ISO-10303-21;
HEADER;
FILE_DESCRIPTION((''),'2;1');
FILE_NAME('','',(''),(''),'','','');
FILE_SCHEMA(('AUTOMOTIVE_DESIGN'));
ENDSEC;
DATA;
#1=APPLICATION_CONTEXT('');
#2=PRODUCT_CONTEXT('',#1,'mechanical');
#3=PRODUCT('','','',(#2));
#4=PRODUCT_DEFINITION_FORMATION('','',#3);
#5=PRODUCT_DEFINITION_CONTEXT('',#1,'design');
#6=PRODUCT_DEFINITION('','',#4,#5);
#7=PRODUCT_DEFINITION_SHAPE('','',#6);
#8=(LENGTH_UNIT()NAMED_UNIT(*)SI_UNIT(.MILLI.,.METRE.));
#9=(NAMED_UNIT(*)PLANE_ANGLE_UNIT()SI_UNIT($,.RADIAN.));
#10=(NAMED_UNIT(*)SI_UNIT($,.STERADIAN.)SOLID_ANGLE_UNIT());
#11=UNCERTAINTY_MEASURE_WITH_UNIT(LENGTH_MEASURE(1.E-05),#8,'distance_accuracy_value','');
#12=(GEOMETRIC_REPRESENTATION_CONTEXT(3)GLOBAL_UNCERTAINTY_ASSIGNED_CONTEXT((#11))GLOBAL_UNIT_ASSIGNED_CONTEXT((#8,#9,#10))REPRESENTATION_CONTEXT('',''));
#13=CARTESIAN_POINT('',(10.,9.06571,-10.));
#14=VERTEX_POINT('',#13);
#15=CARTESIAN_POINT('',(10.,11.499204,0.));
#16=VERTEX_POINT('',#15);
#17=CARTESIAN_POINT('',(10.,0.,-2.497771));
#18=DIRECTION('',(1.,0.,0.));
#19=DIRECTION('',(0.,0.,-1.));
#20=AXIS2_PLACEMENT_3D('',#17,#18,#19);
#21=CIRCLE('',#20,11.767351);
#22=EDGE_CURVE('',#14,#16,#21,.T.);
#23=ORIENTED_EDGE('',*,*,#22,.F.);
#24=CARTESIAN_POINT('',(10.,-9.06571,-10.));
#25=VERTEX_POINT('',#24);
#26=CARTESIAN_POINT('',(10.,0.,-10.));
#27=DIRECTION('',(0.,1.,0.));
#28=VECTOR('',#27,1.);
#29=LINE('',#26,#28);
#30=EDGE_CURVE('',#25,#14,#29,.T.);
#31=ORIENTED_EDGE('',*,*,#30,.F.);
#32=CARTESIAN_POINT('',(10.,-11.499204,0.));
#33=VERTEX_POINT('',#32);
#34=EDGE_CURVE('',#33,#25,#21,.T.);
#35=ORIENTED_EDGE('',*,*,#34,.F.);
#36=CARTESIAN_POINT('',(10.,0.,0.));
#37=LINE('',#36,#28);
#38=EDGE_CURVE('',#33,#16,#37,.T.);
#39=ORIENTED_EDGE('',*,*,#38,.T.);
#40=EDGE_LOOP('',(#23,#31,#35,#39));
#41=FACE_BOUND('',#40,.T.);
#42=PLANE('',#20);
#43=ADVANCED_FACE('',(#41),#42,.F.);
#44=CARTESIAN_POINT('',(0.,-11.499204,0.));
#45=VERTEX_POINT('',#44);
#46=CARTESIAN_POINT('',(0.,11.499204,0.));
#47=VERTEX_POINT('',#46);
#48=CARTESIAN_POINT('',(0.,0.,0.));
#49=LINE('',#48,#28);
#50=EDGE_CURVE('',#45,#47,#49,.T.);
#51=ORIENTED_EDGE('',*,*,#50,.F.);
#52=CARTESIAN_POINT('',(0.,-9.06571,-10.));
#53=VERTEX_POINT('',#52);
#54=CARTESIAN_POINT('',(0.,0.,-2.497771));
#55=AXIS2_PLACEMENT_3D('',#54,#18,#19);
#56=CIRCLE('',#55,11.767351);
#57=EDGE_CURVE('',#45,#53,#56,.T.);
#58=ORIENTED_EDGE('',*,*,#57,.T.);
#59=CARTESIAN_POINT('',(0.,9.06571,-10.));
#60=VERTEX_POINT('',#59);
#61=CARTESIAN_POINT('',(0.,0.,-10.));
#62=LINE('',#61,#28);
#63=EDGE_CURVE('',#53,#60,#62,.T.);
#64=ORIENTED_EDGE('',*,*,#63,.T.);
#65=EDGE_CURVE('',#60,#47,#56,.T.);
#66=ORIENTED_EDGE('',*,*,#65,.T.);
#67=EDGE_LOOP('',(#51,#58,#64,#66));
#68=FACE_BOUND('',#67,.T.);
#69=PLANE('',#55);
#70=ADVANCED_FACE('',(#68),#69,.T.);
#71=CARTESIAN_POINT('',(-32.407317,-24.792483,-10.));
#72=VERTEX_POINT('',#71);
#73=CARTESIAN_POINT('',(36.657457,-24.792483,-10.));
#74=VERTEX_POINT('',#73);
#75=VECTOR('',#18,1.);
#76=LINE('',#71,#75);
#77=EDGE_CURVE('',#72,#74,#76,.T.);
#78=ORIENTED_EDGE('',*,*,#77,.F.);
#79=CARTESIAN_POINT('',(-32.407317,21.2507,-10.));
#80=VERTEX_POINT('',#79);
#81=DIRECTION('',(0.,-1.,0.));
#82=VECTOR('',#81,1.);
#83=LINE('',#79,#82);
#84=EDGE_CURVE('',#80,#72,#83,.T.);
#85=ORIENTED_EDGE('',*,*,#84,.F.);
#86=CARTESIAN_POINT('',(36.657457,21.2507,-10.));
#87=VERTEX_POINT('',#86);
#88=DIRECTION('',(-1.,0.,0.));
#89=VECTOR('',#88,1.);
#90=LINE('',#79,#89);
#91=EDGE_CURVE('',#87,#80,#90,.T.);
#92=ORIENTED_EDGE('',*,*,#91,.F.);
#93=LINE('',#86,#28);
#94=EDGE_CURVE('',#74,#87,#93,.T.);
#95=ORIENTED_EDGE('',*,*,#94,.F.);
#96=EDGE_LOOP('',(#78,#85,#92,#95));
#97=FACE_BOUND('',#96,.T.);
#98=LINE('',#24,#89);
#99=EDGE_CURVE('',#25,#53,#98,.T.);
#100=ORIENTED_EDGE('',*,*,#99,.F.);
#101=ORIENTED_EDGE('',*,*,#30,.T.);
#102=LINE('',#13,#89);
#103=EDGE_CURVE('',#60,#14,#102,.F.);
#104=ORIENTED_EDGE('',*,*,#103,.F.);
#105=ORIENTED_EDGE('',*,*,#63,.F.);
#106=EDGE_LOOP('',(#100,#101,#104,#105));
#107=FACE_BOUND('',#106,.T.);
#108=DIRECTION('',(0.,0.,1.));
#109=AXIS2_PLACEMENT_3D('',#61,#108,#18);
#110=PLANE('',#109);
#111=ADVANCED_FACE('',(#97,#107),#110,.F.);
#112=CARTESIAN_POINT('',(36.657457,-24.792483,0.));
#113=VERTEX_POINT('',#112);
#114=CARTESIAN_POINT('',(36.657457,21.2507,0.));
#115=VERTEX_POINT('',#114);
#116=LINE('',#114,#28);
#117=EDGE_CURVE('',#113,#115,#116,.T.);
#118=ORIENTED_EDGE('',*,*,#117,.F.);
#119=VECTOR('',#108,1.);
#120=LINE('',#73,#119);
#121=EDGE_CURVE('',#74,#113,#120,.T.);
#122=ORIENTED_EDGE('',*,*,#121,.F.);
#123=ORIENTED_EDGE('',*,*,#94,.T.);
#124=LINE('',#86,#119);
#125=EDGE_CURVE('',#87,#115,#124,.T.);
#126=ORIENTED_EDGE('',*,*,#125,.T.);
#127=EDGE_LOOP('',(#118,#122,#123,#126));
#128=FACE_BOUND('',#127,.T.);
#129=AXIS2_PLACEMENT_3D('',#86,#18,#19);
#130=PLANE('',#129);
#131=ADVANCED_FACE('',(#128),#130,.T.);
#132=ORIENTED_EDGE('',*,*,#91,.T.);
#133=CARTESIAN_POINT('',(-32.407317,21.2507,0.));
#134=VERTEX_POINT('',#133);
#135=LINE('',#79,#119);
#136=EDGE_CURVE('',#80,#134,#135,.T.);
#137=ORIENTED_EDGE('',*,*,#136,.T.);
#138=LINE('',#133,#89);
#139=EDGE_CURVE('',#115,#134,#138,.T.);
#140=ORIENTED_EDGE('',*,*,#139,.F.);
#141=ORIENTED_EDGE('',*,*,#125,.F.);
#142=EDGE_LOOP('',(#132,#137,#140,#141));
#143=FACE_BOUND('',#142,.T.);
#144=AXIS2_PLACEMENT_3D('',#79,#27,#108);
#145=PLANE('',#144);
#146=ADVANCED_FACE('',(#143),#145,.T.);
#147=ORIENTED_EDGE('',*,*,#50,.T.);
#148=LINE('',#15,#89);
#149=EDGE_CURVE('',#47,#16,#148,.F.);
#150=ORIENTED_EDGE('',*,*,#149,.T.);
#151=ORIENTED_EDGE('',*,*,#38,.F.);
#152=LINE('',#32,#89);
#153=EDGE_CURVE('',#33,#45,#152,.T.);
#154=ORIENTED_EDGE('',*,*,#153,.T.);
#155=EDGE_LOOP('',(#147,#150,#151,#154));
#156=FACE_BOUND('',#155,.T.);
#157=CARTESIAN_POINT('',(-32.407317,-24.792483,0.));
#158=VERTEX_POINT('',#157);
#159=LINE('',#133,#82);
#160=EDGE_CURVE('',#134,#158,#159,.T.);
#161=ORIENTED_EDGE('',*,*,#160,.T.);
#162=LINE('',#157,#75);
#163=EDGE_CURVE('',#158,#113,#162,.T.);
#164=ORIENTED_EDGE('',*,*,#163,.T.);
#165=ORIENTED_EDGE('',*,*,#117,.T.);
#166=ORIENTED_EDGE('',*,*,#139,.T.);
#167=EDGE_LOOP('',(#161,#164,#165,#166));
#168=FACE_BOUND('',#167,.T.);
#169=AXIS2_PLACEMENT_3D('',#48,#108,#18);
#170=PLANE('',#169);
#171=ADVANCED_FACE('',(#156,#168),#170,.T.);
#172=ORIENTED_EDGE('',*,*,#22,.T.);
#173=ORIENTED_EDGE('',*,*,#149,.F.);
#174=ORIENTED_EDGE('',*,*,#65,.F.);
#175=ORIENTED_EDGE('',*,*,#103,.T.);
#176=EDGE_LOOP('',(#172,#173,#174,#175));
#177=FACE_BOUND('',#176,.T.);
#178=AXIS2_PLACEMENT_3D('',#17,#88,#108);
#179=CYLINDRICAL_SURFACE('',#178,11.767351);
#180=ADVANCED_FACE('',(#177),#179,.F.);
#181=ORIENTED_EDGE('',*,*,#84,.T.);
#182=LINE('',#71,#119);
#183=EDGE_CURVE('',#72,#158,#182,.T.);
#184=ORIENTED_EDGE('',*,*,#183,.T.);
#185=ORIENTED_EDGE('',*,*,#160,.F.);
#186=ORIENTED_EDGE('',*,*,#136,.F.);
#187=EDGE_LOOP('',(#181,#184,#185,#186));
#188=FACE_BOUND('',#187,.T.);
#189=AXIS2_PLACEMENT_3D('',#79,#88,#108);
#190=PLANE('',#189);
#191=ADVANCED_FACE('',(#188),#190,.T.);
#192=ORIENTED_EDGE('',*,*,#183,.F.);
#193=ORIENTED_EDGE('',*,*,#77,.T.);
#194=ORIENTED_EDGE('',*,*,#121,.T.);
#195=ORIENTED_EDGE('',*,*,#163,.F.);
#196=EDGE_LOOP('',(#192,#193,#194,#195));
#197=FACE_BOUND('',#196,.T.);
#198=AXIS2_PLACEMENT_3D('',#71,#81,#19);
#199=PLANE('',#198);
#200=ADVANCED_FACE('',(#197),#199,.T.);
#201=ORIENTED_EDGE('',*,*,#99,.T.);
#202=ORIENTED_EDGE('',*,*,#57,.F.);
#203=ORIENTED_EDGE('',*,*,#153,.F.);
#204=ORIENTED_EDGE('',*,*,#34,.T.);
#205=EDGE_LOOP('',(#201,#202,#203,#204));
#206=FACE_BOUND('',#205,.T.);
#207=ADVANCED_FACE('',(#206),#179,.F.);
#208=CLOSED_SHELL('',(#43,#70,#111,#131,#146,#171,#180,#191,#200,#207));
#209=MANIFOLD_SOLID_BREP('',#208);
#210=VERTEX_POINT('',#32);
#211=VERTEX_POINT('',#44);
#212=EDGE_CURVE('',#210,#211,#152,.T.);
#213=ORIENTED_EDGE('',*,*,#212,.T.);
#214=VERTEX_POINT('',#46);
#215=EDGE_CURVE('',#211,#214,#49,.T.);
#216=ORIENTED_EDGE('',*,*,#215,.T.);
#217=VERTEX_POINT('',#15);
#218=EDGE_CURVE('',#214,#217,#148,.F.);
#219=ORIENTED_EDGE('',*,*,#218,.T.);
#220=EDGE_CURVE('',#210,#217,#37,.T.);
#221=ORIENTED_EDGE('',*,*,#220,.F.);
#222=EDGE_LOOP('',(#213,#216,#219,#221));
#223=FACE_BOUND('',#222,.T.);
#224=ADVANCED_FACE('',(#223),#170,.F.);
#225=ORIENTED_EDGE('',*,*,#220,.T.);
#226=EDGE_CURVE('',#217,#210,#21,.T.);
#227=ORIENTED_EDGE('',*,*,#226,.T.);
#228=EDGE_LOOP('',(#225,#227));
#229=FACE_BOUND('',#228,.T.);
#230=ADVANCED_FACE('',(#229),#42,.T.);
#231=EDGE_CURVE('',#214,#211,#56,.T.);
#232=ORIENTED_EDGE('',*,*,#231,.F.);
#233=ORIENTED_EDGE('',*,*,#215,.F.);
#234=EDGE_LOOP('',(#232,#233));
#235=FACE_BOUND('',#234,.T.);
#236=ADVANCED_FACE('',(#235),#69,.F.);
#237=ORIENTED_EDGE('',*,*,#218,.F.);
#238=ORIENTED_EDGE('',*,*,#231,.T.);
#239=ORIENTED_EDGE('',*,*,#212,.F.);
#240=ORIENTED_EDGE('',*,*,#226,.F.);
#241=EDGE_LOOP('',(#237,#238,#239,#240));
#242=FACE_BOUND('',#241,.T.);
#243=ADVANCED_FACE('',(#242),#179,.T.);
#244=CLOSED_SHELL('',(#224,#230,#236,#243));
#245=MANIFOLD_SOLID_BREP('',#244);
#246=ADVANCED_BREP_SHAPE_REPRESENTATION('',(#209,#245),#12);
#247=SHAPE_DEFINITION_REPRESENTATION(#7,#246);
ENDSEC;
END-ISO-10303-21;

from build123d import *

# Parameters (mm, degrees)
SKETCH_1_W      = 69.064774026
SKETCH_1_H      = 46.043182684
EXTRUDE_1_DEPTH = 10
SKETCH_2_R      = 11.767350743
EXTRUDE_3_DEPTH = 10
OTHER_1_DEPTH   = 10


# Read off the part's stored shape, not the designer's step: Пересечение1
with BuildPart() as part:
    # Эскиз1 → Бобышка-Вытянуть1 (new body)
    with BuildSketch(Plane.XY):
        with Locations((2.12506997, -1.770891642)):
            Rectangle(SKETCH_1_W, SKETCH_1_H)
    extrude(amount=-EXTRUDE_1_DEPTH)


with BuildPart() as body_2:
    # Эскиз2 → Бобышка-Вытянуть3 (new body)
    with BuildSketch(Plane(origin=(0, 0, 0), x_dir=(0, 0, -1), z_dir=(1, 0, 0))):
        with Locations((-19.75002894, 0)):
            Circle(SKETCH_2_R)
    extrude(amount=EXTRUDE_3_DEPTH)


with BuildPart() as body_2_1:
    # Move Body 1: moved
    add(body_2.part.moved(Location((0, 0, -22.247799759))))


with BuildPart() as other_1_tool:
    # Пересечение1 outline → Пересечение1 (new body)
    with BuildSketch(Plane.YZ):
        with BuildLine():
            Line((11.499203644, 0), (-11.499203644, 0))
            ThreePointArc((-11.499203644, 0), (0, -14.265121562), (11.499203644, 0))
        make_face()
    extrude(amount=OTHER_1_DEPTH)


with BuildPart() as part_1:
    add(part.part)

    # Пересечение1: cut by other_1_tool
    add(other_1_tool.part, mode=Mode.SUBTRACT)


with BuildPart() as body_2_2:
    add(body_2_1.part)

    # Пересечение1: cut by other_1_tool
    add(other_1_tool.part, mode=Mode.SUBTRACT)


solid = Compound([part_1.part, body_2_2.part])
